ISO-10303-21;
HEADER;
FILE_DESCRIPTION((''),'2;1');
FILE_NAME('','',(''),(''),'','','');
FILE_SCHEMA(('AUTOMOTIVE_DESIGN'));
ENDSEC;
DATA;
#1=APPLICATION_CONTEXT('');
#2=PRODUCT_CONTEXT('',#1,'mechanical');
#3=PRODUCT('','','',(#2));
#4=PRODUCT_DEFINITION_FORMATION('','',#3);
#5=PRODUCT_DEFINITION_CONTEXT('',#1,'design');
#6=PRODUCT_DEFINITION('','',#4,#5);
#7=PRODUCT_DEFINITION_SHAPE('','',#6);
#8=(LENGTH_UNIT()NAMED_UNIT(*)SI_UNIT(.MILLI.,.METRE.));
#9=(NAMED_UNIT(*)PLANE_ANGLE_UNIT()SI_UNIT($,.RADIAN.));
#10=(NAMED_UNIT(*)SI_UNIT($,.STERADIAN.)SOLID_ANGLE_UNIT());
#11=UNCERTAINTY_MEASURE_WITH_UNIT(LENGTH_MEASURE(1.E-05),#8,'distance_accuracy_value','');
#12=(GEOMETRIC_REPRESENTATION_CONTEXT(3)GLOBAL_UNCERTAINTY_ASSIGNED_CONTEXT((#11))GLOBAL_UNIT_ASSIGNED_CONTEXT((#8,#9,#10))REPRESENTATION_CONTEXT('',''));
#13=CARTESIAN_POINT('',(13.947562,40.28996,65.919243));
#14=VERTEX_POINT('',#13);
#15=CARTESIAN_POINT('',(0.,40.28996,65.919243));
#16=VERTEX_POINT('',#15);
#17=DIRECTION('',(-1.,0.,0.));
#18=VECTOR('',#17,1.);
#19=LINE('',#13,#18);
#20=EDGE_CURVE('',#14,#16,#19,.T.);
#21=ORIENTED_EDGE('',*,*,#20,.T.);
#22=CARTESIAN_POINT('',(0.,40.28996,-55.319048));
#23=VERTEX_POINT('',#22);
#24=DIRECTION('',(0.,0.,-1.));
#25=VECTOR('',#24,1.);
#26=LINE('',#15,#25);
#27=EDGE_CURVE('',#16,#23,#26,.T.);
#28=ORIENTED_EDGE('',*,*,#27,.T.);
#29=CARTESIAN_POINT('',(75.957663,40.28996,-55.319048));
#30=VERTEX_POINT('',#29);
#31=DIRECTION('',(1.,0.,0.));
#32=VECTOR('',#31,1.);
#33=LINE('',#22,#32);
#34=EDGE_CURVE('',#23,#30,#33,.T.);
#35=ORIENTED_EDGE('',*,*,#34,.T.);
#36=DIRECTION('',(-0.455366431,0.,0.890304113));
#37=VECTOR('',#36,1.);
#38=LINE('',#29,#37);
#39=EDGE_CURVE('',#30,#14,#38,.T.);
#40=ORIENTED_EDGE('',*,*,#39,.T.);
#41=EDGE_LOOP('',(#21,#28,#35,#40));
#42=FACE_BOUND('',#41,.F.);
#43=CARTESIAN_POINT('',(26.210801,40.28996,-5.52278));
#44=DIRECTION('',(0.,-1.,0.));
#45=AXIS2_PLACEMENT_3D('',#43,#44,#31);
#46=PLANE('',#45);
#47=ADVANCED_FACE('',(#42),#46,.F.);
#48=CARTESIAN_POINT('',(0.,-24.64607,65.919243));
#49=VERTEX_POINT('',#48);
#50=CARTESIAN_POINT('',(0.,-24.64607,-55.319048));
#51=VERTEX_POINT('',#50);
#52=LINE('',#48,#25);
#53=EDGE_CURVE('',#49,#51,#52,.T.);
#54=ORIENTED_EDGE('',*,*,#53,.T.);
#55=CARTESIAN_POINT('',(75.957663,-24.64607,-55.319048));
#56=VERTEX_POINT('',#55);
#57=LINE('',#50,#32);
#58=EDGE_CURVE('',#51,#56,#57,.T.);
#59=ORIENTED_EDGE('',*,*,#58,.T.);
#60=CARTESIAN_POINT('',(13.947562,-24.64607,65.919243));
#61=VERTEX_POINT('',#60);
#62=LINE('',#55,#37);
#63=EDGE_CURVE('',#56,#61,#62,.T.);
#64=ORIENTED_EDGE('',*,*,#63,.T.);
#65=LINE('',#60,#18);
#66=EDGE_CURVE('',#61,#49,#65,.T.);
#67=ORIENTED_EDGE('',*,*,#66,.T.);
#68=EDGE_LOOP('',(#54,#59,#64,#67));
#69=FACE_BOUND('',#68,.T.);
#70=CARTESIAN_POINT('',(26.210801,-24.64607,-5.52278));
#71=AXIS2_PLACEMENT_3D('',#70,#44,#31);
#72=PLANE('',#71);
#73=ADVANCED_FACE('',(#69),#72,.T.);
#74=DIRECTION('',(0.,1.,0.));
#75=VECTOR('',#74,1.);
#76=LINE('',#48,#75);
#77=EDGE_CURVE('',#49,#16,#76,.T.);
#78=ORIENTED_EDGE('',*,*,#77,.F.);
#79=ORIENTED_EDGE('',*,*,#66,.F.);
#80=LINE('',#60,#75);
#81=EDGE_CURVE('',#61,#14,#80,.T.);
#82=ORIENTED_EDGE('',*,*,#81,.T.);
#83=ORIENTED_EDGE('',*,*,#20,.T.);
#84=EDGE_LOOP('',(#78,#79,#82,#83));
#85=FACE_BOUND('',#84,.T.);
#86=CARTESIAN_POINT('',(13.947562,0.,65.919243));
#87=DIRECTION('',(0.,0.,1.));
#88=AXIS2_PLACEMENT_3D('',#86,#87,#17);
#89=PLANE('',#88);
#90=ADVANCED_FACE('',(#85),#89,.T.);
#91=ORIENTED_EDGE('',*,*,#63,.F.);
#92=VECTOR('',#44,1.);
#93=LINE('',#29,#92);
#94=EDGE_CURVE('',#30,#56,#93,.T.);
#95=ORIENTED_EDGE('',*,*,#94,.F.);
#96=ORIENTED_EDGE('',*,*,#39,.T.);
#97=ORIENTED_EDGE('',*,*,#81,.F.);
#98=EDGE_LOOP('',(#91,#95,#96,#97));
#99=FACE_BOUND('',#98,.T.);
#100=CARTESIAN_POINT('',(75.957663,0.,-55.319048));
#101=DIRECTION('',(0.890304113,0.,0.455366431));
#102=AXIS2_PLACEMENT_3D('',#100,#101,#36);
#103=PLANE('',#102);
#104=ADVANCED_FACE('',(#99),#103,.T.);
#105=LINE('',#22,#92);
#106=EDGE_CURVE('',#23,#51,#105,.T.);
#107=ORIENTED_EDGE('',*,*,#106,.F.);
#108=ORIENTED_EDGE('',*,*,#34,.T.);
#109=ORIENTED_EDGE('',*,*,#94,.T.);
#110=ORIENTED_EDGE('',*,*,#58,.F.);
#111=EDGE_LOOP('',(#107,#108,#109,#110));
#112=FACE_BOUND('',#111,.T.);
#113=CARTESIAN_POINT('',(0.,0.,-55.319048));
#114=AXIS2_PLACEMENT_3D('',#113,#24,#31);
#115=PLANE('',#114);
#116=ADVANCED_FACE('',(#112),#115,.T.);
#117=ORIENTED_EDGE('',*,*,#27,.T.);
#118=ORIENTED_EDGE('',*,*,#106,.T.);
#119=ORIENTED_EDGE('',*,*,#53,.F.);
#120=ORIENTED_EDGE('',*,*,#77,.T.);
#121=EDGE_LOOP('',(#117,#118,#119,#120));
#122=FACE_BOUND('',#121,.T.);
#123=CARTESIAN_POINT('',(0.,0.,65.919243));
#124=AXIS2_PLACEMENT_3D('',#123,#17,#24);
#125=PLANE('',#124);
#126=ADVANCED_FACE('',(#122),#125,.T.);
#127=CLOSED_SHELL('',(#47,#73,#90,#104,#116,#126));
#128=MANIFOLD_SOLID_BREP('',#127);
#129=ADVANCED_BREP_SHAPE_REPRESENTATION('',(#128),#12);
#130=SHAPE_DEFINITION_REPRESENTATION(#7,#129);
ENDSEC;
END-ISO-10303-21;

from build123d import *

# Parameters (mm, degrees)
F1_DEPTH      = 24.64607
F1_DEPTH_BACK = 40.28996


# Not quite as in the source:
# - a feature names something its author has since deleted; it is built from what else it names


with BuildPart() as f1:
    # F0 (on Front) → F1 (new body, two sides)
    with BuildSketch(Plane.XZ) as f1_sk:
        Polygon((0, 65.9192427993), (0, -55.3190484643), (75.9576633573, -55.3190484643), (13.9475623146, 65.9192427993), align=None)
    extrude(amount=F1_DEPTH)
    extrude(f1_sk.sketch, amount=-F1_DEPTH_BACK)


solid = f1.part
